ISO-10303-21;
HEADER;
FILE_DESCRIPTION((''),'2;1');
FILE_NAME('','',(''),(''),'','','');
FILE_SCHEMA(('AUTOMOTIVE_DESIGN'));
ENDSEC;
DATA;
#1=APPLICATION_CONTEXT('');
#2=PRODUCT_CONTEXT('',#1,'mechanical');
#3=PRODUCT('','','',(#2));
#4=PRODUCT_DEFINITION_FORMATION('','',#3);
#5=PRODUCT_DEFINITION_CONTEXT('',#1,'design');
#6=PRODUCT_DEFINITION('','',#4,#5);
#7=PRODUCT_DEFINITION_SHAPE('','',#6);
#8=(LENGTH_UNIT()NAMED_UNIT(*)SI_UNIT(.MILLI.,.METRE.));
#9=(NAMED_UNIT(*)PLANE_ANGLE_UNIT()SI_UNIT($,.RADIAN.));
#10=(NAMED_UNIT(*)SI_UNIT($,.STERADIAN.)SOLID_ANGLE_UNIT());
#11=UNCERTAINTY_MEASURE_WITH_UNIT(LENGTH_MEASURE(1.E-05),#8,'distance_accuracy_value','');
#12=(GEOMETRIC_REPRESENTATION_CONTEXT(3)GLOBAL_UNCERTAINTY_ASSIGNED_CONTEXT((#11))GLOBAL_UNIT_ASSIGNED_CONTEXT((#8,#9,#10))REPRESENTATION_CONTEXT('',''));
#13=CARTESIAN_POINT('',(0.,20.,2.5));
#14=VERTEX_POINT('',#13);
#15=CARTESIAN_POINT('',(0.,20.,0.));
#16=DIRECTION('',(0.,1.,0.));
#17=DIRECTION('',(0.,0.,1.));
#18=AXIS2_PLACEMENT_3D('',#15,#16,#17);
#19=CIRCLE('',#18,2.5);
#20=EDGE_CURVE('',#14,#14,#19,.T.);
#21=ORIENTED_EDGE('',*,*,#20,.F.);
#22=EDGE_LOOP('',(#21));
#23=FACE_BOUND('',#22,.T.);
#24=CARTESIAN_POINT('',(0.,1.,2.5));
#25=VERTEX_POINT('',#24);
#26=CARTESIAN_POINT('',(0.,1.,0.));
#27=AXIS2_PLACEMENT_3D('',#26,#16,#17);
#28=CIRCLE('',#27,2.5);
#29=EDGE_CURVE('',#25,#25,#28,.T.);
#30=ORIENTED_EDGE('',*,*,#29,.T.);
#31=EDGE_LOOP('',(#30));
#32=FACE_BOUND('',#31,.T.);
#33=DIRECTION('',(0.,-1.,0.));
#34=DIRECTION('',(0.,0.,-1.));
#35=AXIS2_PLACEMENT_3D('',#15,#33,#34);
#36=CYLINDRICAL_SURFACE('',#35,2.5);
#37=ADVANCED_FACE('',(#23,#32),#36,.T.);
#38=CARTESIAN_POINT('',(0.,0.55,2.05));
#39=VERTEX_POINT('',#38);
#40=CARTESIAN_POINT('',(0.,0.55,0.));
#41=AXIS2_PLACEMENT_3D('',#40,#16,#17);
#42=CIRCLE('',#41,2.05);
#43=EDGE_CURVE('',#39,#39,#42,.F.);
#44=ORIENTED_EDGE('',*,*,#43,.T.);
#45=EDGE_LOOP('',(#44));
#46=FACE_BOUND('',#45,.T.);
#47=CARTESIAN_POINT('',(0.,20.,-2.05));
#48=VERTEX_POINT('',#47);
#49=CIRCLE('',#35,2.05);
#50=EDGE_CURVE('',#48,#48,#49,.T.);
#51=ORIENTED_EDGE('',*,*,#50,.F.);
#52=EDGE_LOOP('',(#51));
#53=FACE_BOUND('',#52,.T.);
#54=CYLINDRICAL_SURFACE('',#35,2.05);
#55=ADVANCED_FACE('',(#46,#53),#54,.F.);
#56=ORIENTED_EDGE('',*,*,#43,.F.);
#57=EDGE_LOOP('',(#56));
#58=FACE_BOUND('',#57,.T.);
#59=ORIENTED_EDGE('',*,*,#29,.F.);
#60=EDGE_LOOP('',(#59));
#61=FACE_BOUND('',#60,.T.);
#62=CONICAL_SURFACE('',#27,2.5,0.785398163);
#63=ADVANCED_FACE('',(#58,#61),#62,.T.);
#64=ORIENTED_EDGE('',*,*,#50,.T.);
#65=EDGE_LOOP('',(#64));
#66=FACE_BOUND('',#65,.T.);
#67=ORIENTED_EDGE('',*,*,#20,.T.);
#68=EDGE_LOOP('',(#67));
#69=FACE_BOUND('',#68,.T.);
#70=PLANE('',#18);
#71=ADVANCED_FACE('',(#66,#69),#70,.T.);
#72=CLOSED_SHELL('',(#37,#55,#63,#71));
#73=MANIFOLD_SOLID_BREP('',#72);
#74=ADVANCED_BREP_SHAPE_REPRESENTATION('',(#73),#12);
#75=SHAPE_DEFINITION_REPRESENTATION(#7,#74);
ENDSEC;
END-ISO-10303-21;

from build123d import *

# Parameters (mm, degrees)
SKETCH_1_R          = 2.5
EXTRUDE_1_DEPTH     = 20
SKETCH_2_R          = 2.05
CUT_EXTRUDE_1_DEPTH = 21.310096012
CHAMFER_1_SIZE      = 1


with BuildPart() as part:
    # 草图1 → 凸台-拉伸1 (new body)
    with BuildSketch(Plane(origin=(0, 0, 0), x_dir=(1, 0, 0), z_dir=(0, 1, 0))):
        with Locations(Location((0, 0, 0), (0, 0, 270))):
            Circle(SKETCH_1_R)
    extrude(amount=EXTRUDE_1_DEPTH)

    # 草图2 → 切除-拉伸1 (cut, through all)
    with BuildSketch(Plane.XZ):
        with Locations(Location((0, 0, 0), (0, 0, 270))):
            Circle(SKETCH_2_R)
    extrude(amount=-CUT_EXTRUDE_1_DEPTH, mode=Mode.SUBTRACT)

    # 倒角1
    # the kernel refuses this chamfer: 1 mm, written as the material it takes off along each edge
    with BuildSketch(Plane(origin=(0, 0, 0), x_dir=(0, 0, 1), z_dir=(-1, 0, 0))) as chamfer_1_piece_1:
        Polygon((2.5, CHAMFER_1_SIZE), (2.5 - CHAMFER_1_SIZE, 0), (2.5, 0), align=None)
    revolve(axis=Axis((0, 0, 0), (0, 1, 0)), mode=Mode.SUBTRACT)


solid = part.part
